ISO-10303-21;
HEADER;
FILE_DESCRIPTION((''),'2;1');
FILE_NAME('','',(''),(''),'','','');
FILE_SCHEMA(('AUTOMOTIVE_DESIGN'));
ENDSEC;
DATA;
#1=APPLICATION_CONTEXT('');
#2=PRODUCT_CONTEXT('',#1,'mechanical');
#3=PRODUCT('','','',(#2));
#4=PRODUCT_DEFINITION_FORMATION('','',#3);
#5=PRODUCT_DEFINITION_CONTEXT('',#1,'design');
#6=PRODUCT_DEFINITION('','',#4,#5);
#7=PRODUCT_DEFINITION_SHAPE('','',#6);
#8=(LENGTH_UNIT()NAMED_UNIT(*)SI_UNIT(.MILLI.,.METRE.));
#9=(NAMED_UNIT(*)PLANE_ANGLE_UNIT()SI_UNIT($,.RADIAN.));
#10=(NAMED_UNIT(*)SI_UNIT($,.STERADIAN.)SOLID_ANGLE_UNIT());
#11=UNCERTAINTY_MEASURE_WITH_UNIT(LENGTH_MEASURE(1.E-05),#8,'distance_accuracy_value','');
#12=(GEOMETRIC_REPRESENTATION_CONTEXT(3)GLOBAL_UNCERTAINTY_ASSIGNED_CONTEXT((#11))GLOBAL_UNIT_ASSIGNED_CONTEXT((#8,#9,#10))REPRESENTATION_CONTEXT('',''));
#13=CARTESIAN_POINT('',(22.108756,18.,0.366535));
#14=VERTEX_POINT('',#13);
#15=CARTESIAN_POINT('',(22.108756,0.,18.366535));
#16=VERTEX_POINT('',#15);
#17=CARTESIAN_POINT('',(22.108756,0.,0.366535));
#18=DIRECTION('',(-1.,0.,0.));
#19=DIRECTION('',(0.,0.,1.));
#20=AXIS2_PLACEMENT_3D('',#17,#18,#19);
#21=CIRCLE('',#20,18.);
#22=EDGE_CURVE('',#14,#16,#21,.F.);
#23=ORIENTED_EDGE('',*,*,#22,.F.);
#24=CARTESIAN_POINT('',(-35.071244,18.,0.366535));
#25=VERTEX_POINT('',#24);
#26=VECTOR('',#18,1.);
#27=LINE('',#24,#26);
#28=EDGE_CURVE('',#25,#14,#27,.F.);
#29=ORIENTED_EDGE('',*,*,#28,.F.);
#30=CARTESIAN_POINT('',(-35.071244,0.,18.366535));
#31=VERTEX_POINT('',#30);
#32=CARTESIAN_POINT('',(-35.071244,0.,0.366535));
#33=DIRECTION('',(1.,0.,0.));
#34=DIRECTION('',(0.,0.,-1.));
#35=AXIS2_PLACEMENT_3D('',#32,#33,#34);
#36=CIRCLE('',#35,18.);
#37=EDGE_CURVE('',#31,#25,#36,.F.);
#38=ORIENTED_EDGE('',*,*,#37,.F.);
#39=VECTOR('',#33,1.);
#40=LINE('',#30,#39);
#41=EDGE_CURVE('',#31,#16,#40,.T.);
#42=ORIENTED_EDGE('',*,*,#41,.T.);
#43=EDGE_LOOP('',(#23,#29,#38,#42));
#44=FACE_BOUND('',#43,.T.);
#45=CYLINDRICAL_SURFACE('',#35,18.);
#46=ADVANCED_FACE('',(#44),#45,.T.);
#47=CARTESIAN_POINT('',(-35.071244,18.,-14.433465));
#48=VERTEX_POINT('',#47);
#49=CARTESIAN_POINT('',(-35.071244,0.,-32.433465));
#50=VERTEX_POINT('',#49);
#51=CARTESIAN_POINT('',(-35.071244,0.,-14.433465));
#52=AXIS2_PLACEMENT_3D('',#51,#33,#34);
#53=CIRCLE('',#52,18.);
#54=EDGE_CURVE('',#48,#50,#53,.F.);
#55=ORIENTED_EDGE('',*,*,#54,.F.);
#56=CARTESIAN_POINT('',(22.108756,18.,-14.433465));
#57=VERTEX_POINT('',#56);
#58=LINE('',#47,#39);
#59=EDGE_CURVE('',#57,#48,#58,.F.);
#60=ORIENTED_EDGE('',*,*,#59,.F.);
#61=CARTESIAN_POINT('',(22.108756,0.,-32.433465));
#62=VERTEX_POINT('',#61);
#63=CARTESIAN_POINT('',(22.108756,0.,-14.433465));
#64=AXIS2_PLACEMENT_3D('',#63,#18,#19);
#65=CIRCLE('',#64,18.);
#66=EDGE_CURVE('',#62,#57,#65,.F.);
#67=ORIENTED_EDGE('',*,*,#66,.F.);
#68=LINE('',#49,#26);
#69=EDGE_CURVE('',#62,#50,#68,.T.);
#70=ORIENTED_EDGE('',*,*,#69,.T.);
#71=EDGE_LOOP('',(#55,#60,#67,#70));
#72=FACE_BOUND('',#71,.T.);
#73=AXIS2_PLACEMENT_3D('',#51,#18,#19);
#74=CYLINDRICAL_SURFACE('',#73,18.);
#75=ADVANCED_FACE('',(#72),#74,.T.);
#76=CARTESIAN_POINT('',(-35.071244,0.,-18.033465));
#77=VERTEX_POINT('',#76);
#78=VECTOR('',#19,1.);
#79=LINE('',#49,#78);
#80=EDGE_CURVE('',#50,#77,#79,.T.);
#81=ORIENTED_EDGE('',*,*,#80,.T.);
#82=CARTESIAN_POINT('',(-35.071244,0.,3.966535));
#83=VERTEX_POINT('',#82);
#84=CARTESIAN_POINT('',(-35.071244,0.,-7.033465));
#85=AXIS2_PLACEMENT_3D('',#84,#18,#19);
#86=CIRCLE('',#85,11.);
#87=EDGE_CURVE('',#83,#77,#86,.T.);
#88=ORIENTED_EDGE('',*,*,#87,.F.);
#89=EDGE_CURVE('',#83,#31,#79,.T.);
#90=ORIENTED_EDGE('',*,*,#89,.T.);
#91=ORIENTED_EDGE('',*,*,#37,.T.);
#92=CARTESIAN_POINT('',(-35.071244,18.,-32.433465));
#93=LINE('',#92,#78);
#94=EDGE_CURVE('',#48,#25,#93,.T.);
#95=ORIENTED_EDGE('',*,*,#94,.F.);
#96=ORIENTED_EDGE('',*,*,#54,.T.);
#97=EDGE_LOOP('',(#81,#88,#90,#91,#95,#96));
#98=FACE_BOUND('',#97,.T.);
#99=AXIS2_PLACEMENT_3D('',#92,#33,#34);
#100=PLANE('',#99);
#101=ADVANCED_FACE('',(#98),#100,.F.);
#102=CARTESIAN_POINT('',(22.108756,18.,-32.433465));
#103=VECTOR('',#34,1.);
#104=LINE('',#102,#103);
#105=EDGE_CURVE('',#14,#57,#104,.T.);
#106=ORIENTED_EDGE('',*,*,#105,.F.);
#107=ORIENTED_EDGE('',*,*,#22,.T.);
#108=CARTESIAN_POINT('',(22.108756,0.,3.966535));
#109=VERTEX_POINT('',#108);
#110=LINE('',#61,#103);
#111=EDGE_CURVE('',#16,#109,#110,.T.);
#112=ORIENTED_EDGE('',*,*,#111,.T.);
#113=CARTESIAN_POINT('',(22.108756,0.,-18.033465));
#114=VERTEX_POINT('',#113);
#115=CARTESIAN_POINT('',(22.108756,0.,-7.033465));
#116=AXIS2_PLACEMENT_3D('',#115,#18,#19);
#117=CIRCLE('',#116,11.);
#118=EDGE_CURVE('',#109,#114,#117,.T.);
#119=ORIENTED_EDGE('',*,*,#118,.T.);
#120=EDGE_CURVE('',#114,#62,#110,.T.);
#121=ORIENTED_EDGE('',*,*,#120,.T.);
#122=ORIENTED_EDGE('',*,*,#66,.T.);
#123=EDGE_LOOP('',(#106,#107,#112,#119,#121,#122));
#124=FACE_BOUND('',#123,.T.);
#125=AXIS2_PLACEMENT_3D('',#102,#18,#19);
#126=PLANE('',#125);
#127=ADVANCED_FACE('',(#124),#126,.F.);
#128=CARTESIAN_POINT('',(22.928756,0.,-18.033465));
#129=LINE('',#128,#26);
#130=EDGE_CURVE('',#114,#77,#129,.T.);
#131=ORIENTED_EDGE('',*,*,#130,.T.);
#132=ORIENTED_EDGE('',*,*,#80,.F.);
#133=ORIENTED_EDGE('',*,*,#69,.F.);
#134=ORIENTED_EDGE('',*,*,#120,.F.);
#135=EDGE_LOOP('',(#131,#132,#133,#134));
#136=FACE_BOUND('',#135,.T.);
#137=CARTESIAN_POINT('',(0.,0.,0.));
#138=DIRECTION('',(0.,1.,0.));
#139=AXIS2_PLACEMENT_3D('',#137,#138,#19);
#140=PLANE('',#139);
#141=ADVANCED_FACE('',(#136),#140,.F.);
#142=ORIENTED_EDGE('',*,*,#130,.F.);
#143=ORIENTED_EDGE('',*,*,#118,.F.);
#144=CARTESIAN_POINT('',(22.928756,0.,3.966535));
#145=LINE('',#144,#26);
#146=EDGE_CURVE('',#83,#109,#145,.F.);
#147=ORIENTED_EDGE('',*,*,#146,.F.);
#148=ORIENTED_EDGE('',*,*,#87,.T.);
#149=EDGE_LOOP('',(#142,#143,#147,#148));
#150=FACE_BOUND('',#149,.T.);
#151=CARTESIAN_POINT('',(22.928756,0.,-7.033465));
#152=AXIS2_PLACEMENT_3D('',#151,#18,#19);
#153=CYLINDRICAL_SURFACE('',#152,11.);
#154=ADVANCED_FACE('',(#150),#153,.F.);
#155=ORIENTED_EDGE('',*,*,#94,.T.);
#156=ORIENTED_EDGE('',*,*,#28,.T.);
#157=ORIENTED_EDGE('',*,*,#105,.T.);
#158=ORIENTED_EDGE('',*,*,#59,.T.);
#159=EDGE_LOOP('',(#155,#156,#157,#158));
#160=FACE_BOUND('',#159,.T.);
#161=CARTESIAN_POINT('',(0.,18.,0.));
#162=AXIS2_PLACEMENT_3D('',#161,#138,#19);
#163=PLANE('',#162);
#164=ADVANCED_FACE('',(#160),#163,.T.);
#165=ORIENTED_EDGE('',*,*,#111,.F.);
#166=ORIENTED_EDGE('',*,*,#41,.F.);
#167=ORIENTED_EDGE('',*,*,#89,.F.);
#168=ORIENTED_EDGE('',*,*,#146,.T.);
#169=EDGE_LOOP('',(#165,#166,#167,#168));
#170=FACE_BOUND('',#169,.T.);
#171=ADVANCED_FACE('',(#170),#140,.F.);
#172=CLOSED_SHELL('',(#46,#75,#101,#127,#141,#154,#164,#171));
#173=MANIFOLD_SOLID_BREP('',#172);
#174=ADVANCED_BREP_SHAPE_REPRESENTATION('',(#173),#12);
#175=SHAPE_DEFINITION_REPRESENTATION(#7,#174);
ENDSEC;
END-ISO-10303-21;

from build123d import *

# Parameters (mm, degrees)
SKETCH1_W           = 57.18
SKETCH1_H           = 50.8
BOSS_EXTRUDE1_DEPTH = 18
SKETCH2_R           = 11
CUT_EXTRUDE1_DEPTH  = 58
FILLET2_R           = 18
FILLET3_R           = 18


with BuildPart() as part:
    # Sketch1 → Boss-Extrude1 (new body)
    with BuildSketch(Plane(origin=(0, 0, 0), x_dir=(1, 0, 0), z_dir=(0, 1, 0))):
        with Locations((-6.481243802, 7.033465199)):
            Rectangle(SKETCH1_W, SKETCH1_H)
    extrude(amount=BOSS_EXTRUDE1_DEPTH)

    # Sketch2 → Cut-Extrude1 (cut)
    with BuildSketch(Plane.ZY.offset(35.071243802)):
        with Locations((-7.033465199, 0)):
            Circle(SKETCH2_R)
    extrude(amount=-CUT_EXTRUDE1_DEPTH, mode=Mode.SUBTRACT)

    # Fillet2
    fillet2_edges = [part.edges().sort_by_distance(p)[0] for p in [
        (-6.481243802, 18, 18.366534801),
    ]]
    fillet(fillet2_edges, radius=FILLET2_R - 0.0001)  # a hair under: the kernel refuses the full size

    # Fillet3
    fillet3_edges = [part.edges().sort_by_distance(p)[0] for p in [
        (-6.481243802, 18, -32.433465199),
    ]]
    fillet(fillet3_edges, radius=FILLET3_R - 0.0001)  # a hair under: the kernel refuses the full size


solid = part.part
